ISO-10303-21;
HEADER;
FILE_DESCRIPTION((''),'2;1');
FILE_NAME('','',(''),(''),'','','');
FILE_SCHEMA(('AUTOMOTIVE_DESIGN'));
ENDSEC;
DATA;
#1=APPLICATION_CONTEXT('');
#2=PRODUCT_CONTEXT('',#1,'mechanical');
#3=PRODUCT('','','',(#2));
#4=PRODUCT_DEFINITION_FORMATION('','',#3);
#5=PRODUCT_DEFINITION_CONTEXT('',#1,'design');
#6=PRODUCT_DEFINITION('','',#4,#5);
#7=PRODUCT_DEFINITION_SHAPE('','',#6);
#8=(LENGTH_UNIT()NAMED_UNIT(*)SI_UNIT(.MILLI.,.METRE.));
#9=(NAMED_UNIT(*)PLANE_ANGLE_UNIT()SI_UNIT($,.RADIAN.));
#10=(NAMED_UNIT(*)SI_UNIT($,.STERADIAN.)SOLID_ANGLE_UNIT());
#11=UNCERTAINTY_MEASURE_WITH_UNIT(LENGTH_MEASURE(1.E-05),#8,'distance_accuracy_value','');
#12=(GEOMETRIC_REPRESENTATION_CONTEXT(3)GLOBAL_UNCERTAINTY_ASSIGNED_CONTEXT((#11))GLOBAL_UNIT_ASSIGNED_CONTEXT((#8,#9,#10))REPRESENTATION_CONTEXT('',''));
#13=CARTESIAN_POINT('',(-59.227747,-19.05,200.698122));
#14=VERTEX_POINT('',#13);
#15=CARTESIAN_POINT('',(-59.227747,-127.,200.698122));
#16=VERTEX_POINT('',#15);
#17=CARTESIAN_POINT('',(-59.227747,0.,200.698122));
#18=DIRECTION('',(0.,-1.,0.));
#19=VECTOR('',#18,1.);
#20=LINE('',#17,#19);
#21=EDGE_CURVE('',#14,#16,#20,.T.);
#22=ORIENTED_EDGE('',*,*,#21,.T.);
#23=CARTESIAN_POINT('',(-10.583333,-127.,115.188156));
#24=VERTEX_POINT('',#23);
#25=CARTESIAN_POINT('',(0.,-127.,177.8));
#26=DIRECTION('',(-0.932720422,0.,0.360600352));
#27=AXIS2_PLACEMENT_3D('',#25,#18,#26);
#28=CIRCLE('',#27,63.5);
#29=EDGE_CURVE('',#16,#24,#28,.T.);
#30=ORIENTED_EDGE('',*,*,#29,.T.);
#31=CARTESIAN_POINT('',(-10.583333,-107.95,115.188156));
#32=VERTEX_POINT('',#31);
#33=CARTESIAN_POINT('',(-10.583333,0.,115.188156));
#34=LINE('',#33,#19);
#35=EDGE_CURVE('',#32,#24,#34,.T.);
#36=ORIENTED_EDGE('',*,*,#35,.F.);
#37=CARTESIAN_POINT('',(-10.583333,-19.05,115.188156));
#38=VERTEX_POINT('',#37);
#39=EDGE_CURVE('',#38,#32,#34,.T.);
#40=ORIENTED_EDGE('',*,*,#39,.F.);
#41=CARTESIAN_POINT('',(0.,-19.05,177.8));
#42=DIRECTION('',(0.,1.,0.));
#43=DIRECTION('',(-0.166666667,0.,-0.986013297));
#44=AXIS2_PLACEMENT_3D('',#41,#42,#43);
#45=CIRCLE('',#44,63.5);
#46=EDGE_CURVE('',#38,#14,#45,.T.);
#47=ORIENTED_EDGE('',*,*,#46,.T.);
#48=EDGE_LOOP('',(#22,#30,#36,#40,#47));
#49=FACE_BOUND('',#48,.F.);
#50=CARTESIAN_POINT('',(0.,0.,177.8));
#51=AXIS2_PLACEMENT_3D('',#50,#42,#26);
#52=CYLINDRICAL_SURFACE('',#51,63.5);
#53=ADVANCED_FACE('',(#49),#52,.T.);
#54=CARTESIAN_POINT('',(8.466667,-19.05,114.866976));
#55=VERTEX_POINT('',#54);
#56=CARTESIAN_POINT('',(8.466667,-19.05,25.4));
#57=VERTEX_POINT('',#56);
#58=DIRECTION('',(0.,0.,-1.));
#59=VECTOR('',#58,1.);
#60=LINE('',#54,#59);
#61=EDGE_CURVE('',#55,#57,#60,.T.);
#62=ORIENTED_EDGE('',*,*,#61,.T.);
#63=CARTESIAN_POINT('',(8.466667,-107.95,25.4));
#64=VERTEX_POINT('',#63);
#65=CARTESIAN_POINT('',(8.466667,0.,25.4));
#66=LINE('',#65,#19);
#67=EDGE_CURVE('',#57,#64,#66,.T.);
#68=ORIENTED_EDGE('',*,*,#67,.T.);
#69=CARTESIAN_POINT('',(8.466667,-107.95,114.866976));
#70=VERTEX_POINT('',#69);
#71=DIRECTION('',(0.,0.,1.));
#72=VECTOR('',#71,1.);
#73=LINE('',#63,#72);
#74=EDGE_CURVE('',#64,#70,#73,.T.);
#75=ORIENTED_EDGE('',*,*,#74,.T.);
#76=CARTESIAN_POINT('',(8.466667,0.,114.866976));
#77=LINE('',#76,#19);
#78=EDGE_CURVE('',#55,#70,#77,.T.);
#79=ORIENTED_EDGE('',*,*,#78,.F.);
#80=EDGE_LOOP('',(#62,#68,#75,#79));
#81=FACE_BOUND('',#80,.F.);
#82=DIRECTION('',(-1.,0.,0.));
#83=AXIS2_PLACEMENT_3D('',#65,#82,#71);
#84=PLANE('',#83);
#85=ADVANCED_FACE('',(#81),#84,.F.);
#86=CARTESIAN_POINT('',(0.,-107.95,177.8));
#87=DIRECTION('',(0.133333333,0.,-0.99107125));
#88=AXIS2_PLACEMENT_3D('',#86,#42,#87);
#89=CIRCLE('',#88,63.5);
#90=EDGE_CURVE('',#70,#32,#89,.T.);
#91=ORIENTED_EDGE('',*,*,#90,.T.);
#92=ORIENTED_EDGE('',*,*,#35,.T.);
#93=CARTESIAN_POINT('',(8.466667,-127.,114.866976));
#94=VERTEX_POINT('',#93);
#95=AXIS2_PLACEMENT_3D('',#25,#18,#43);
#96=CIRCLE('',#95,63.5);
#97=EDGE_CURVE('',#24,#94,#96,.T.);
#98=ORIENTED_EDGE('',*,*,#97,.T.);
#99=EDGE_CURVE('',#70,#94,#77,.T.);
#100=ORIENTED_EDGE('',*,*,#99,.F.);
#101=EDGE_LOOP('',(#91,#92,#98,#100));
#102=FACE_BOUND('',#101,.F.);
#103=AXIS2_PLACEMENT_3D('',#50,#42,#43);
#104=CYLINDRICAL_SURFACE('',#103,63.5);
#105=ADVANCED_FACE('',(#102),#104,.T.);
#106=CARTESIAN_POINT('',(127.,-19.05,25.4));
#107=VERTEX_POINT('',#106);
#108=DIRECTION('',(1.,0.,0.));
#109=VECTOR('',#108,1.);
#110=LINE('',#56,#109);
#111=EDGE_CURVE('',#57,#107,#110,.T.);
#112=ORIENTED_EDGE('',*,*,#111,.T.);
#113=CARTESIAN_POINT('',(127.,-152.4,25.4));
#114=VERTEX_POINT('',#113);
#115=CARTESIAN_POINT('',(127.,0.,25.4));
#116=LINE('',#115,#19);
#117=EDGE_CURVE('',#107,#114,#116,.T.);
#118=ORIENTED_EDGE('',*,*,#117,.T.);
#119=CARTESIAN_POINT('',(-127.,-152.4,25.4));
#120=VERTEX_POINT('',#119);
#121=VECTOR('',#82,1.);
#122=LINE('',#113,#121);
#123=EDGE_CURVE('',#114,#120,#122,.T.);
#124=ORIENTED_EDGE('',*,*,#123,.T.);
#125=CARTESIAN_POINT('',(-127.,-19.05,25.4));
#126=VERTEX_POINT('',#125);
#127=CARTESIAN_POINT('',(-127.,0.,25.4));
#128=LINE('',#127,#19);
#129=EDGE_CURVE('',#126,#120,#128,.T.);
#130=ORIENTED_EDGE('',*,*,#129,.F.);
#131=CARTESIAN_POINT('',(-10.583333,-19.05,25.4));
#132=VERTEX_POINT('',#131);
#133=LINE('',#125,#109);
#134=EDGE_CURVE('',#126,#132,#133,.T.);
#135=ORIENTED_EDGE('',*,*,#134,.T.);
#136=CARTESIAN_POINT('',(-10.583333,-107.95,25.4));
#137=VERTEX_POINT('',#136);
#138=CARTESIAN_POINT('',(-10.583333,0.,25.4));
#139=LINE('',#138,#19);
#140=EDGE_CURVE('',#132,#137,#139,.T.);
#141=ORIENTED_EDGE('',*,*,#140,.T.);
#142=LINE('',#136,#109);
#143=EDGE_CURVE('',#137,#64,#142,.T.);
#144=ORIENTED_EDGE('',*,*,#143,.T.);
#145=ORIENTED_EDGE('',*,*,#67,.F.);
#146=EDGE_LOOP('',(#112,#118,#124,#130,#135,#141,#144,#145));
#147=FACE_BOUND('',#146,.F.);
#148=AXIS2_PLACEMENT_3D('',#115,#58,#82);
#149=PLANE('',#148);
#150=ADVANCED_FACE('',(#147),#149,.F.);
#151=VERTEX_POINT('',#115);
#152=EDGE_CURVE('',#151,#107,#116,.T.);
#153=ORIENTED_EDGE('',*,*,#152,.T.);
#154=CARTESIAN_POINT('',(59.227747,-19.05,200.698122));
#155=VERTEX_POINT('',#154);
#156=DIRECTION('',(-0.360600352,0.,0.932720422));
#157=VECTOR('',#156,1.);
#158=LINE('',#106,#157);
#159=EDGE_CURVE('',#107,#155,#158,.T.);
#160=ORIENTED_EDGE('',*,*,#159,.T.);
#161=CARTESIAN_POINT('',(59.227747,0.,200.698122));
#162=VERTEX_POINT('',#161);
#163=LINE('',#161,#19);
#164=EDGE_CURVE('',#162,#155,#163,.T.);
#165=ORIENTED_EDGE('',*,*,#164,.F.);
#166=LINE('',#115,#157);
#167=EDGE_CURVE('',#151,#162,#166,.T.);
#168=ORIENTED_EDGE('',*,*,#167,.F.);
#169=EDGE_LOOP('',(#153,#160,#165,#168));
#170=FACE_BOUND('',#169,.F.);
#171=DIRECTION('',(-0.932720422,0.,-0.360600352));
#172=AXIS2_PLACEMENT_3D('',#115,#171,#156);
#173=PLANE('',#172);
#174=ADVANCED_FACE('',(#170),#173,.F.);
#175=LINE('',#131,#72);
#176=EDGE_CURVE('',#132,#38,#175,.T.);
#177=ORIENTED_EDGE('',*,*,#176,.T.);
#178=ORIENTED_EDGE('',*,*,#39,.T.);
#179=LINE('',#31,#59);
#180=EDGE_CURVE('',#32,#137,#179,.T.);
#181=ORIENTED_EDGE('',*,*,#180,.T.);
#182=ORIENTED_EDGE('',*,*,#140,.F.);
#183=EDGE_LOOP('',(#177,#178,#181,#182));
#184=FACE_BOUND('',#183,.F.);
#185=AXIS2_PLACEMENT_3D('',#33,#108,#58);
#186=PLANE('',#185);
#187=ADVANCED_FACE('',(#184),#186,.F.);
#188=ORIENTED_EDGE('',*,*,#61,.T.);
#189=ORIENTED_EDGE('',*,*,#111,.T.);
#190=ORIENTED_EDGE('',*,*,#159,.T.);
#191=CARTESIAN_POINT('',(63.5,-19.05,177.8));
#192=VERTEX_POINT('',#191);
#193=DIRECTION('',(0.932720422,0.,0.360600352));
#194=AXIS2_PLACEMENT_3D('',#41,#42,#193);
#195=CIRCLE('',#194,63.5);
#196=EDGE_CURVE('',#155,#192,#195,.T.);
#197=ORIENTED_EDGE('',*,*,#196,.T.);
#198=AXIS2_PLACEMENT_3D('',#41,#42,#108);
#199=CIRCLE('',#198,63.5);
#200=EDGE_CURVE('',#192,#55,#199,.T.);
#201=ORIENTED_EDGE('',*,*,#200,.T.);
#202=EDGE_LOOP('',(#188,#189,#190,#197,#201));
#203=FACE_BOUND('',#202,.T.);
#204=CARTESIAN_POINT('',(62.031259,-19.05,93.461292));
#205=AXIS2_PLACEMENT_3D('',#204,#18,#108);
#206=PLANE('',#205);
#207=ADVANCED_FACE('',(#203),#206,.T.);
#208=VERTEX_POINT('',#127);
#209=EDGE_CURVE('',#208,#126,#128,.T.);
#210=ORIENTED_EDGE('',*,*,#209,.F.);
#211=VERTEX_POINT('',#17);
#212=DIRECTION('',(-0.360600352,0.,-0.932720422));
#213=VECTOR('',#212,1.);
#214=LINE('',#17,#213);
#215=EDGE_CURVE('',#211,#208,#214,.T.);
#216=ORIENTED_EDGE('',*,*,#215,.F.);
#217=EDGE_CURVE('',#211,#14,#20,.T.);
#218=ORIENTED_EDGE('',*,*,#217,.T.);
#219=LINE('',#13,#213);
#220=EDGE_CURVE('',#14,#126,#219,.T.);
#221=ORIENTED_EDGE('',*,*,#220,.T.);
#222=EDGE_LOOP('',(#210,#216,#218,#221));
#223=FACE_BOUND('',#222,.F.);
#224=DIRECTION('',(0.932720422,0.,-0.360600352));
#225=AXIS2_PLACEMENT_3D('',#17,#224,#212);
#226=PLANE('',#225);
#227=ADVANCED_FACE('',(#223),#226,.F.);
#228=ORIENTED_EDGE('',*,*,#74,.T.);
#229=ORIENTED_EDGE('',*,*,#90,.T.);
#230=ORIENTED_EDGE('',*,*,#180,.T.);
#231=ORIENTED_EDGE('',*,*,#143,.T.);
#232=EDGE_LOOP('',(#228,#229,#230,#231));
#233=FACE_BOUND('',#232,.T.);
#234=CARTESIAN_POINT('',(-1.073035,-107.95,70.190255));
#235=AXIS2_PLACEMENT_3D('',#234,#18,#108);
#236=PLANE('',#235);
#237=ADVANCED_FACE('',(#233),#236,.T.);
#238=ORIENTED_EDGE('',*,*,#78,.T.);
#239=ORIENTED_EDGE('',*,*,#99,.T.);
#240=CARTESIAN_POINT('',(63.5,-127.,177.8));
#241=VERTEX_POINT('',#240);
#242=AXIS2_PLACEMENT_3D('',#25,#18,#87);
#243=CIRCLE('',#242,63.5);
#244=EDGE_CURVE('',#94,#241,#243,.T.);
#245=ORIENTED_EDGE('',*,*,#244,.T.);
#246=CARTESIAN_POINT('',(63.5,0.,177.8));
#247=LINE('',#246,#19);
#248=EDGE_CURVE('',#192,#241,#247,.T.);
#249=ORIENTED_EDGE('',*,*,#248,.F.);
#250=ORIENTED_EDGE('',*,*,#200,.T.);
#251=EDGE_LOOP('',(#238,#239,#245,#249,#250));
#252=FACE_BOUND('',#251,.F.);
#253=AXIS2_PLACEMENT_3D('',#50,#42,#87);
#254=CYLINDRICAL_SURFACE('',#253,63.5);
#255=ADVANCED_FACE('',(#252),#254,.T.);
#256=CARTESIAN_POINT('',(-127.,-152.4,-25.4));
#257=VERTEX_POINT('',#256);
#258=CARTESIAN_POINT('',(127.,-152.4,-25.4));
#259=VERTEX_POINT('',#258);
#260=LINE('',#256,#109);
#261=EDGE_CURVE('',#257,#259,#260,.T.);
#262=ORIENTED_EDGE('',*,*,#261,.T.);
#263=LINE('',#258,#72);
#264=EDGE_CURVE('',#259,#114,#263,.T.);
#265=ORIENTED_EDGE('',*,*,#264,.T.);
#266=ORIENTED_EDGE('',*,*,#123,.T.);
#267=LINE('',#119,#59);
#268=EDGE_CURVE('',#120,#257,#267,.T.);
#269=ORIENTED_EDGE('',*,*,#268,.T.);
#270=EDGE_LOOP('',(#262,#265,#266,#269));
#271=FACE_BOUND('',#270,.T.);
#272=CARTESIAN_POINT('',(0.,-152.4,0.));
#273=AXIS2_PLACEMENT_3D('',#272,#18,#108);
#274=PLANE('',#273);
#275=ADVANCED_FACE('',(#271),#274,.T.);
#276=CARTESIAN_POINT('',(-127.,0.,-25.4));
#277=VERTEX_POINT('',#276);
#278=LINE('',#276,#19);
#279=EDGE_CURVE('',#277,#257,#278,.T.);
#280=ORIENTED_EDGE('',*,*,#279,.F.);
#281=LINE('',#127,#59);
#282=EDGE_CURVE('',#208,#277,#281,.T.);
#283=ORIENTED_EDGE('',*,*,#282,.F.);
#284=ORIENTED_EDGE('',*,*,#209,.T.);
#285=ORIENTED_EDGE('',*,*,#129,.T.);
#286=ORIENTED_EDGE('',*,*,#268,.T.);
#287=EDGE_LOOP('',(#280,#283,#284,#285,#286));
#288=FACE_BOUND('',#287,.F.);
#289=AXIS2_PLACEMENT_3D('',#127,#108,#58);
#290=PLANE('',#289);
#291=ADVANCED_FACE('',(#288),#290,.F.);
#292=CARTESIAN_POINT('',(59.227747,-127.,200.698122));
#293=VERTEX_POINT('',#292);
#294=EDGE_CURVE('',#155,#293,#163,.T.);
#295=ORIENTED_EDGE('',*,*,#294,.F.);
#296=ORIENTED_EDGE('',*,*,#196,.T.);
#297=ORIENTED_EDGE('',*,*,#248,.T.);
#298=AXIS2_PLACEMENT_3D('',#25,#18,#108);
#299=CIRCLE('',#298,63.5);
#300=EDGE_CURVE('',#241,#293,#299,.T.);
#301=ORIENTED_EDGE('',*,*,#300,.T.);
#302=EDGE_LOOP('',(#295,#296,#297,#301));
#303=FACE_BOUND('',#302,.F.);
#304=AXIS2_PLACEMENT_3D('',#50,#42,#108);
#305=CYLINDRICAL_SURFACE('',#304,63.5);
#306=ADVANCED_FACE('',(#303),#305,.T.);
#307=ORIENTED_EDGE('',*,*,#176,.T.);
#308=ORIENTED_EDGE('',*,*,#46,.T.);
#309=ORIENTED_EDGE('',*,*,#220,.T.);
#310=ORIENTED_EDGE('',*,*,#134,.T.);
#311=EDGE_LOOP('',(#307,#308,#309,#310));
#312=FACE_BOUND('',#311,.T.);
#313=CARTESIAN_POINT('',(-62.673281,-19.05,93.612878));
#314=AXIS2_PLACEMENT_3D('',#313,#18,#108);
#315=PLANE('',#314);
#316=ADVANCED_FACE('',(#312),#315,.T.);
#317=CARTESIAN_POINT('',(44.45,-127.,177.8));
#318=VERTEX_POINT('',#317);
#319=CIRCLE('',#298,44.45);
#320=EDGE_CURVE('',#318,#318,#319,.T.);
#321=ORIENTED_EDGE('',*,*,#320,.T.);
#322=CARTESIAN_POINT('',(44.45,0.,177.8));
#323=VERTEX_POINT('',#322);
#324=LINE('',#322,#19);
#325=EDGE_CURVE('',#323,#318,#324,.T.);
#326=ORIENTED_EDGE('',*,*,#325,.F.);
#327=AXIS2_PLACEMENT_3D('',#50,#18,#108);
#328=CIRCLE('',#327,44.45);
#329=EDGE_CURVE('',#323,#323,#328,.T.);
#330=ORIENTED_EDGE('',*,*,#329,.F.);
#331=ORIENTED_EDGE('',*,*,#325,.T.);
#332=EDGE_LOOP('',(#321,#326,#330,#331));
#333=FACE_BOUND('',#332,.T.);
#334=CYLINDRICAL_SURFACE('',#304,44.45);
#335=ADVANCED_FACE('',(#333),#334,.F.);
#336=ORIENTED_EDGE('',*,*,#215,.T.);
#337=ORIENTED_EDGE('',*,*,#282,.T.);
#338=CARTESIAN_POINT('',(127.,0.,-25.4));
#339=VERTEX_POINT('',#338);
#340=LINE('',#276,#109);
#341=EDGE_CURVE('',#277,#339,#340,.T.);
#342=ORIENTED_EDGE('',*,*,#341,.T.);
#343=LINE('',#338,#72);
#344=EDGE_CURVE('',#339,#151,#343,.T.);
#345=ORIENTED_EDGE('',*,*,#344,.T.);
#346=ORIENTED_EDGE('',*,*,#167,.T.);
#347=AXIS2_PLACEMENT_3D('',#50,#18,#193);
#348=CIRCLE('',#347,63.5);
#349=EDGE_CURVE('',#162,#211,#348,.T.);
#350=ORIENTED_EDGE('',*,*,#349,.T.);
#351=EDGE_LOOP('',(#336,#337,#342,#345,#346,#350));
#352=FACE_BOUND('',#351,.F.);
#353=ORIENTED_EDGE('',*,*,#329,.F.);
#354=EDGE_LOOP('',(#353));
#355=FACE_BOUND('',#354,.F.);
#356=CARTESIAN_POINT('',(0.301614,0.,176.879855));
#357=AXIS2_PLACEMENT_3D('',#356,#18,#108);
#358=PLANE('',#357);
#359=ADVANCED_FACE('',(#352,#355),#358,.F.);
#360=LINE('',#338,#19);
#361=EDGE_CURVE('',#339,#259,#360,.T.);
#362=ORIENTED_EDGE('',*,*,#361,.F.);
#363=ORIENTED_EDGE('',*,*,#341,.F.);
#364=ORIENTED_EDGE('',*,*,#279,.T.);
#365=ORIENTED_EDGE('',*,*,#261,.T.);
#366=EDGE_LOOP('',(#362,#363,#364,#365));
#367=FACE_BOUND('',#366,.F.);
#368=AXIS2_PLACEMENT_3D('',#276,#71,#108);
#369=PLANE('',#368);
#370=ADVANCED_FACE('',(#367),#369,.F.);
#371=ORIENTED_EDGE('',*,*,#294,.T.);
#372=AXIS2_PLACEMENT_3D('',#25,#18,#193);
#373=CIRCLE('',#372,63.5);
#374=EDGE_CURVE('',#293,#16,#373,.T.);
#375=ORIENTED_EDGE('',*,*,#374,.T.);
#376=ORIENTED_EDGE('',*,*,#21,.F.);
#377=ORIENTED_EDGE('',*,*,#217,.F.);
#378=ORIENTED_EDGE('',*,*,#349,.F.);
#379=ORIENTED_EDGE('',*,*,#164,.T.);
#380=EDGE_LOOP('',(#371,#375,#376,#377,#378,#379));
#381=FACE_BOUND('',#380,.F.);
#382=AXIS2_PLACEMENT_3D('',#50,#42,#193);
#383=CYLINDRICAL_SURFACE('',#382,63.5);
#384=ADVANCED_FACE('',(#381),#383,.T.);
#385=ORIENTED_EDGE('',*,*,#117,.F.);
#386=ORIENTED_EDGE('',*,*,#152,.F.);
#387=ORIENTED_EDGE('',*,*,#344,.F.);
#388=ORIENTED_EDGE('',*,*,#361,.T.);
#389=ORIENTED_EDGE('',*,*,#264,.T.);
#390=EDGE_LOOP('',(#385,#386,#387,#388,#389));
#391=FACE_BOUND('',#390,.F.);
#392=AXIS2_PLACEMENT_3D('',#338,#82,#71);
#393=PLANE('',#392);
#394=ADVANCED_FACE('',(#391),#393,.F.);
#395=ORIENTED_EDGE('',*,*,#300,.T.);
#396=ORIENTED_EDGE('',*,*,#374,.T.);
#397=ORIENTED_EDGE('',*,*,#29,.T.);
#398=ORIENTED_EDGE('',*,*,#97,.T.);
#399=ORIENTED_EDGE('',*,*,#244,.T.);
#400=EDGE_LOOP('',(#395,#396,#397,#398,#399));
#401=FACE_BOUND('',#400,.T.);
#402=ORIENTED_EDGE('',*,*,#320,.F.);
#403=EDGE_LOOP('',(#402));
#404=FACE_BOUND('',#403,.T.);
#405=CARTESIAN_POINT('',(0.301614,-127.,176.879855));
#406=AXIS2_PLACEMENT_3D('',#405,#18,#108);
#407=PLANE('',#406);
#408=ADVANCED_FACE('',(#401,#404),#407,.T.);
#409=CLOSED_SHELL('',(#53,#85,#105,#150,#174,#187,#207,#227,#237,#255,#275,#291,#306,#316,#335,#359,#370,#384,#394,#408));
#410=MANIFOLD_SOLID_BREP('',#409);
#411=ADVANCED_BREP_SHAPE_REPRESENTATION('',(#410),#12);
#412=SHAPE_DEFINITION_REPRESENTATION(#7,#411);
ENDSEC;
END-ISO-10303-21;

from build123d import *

# Parameters (mm, degrees)
F2_DEPTH = 107.95
F3_DEPTH = 152.4
F4_DEPTH = 19.05
F1_R     = 44.45
F5_DEPTH = 127


# Not quite as in the source:
# - a variable given as a bare number and used for a length is read in inches; the dataset says mm whatever the document's units were


with BuildPart() as f2:
    # F1 (on Front) → F2 (new body)
    with BuildSketch(Plane.XZ):
        with BuildLine():
            Line((-10.5833333333, 115.1881556289), (-10.5833333333, 25.4))
            Line((-10.5833333333, 25.4), (8.4666666667, 25.4))
            Line((8.4666666667, 25.4), (8.4666666667, 114.8669756364))
            ThreePointArc((8.4666666667, 114.8669756364), (-1.0704478462, 114.3090231497), (-10.5833333333, 115.1881556289))
        make_face()
    extrude(amount=F2_DEPTH)

    # F1 (on Front) → F3 (join)
    with BuildSketch(Plane.XZ):
        Polygon((-10.5833333333, 25.4), (-127, 25.4), (-127, -25.4), (127, -25.4), (127, 25.4), (8.4666666667, 25.4), align=None)
    extrude(amount=F3_DEPTH)

    # F1 (on Front) → F4 (join)
    with BuildSketch(Plane.XZ):
        with BuildLine():
            Line((-59.2277468166, 200.6981223472), (-127, 25.4))
            Line((-127, 25.4), (-10.5833333333, 25.4))
            Line((-10.5833333333, 25.4), (-10.5833333333, 115.1881556289))
            ThreePointArc((-10.5833333333, 115.1881556289), (-55.1940696993, 146.4015180298), (-59.2277468166, 200.6981223472))
        make_face()
        with BuildLine():
            Line((8.4666666667, 114.8669756364), (8.4666666667, 25.4))
            Line((8.4666666667, 25.4), (127, 25.4))
            Line((127, 25.4), (59.2277468166, 200.6981223472))
            ThreePointArc((59.2277468166, 200.6981223472), (62.4228000127, 189.4466320699), (63.5, 177.8))
            ThreePointArc((63.5, 177.8), (47.801063447, 135.9991826236), (8.4666666667, 114.8669756364))
        make_face()
    extrude(amount=F4_DEPTH)

    # F1 (on Front) → F5 (join)
    with BuildSketch(Plane.XZ):
        with BuildLine():
            ThreePointArc((59.2277468166, 200.6981223472), (0, 241.3), (-59.2277468166, 200.6981223472))
            ThreePointArc((-59.2277468166, 200.6981223472), (-55.1940696993, 146.4015180298), (-10.5833333333, 115.1881556289))
            ThreePointArc((-10.5833333333, 115.1881556289), (-1.0704478462, 114.3090231497), (8.4666666667, 114.8669756364))
            ThreePointArc((8.4666666667, 114.8669756364), (47.801063447, 135.9991826236), (63.5, 177.8))
            ThreePointArc((63.5, 177.8), (62.4228000127, 189.4466320699), (59.2277468166, 200.6981223472))
        make_face()
        with Locations((0, 177.8)):
            Circle(F1_R, mode=Mode.SUBTRACT)
    extrude(amount=F5_DEPTH)


solid = f2.part
